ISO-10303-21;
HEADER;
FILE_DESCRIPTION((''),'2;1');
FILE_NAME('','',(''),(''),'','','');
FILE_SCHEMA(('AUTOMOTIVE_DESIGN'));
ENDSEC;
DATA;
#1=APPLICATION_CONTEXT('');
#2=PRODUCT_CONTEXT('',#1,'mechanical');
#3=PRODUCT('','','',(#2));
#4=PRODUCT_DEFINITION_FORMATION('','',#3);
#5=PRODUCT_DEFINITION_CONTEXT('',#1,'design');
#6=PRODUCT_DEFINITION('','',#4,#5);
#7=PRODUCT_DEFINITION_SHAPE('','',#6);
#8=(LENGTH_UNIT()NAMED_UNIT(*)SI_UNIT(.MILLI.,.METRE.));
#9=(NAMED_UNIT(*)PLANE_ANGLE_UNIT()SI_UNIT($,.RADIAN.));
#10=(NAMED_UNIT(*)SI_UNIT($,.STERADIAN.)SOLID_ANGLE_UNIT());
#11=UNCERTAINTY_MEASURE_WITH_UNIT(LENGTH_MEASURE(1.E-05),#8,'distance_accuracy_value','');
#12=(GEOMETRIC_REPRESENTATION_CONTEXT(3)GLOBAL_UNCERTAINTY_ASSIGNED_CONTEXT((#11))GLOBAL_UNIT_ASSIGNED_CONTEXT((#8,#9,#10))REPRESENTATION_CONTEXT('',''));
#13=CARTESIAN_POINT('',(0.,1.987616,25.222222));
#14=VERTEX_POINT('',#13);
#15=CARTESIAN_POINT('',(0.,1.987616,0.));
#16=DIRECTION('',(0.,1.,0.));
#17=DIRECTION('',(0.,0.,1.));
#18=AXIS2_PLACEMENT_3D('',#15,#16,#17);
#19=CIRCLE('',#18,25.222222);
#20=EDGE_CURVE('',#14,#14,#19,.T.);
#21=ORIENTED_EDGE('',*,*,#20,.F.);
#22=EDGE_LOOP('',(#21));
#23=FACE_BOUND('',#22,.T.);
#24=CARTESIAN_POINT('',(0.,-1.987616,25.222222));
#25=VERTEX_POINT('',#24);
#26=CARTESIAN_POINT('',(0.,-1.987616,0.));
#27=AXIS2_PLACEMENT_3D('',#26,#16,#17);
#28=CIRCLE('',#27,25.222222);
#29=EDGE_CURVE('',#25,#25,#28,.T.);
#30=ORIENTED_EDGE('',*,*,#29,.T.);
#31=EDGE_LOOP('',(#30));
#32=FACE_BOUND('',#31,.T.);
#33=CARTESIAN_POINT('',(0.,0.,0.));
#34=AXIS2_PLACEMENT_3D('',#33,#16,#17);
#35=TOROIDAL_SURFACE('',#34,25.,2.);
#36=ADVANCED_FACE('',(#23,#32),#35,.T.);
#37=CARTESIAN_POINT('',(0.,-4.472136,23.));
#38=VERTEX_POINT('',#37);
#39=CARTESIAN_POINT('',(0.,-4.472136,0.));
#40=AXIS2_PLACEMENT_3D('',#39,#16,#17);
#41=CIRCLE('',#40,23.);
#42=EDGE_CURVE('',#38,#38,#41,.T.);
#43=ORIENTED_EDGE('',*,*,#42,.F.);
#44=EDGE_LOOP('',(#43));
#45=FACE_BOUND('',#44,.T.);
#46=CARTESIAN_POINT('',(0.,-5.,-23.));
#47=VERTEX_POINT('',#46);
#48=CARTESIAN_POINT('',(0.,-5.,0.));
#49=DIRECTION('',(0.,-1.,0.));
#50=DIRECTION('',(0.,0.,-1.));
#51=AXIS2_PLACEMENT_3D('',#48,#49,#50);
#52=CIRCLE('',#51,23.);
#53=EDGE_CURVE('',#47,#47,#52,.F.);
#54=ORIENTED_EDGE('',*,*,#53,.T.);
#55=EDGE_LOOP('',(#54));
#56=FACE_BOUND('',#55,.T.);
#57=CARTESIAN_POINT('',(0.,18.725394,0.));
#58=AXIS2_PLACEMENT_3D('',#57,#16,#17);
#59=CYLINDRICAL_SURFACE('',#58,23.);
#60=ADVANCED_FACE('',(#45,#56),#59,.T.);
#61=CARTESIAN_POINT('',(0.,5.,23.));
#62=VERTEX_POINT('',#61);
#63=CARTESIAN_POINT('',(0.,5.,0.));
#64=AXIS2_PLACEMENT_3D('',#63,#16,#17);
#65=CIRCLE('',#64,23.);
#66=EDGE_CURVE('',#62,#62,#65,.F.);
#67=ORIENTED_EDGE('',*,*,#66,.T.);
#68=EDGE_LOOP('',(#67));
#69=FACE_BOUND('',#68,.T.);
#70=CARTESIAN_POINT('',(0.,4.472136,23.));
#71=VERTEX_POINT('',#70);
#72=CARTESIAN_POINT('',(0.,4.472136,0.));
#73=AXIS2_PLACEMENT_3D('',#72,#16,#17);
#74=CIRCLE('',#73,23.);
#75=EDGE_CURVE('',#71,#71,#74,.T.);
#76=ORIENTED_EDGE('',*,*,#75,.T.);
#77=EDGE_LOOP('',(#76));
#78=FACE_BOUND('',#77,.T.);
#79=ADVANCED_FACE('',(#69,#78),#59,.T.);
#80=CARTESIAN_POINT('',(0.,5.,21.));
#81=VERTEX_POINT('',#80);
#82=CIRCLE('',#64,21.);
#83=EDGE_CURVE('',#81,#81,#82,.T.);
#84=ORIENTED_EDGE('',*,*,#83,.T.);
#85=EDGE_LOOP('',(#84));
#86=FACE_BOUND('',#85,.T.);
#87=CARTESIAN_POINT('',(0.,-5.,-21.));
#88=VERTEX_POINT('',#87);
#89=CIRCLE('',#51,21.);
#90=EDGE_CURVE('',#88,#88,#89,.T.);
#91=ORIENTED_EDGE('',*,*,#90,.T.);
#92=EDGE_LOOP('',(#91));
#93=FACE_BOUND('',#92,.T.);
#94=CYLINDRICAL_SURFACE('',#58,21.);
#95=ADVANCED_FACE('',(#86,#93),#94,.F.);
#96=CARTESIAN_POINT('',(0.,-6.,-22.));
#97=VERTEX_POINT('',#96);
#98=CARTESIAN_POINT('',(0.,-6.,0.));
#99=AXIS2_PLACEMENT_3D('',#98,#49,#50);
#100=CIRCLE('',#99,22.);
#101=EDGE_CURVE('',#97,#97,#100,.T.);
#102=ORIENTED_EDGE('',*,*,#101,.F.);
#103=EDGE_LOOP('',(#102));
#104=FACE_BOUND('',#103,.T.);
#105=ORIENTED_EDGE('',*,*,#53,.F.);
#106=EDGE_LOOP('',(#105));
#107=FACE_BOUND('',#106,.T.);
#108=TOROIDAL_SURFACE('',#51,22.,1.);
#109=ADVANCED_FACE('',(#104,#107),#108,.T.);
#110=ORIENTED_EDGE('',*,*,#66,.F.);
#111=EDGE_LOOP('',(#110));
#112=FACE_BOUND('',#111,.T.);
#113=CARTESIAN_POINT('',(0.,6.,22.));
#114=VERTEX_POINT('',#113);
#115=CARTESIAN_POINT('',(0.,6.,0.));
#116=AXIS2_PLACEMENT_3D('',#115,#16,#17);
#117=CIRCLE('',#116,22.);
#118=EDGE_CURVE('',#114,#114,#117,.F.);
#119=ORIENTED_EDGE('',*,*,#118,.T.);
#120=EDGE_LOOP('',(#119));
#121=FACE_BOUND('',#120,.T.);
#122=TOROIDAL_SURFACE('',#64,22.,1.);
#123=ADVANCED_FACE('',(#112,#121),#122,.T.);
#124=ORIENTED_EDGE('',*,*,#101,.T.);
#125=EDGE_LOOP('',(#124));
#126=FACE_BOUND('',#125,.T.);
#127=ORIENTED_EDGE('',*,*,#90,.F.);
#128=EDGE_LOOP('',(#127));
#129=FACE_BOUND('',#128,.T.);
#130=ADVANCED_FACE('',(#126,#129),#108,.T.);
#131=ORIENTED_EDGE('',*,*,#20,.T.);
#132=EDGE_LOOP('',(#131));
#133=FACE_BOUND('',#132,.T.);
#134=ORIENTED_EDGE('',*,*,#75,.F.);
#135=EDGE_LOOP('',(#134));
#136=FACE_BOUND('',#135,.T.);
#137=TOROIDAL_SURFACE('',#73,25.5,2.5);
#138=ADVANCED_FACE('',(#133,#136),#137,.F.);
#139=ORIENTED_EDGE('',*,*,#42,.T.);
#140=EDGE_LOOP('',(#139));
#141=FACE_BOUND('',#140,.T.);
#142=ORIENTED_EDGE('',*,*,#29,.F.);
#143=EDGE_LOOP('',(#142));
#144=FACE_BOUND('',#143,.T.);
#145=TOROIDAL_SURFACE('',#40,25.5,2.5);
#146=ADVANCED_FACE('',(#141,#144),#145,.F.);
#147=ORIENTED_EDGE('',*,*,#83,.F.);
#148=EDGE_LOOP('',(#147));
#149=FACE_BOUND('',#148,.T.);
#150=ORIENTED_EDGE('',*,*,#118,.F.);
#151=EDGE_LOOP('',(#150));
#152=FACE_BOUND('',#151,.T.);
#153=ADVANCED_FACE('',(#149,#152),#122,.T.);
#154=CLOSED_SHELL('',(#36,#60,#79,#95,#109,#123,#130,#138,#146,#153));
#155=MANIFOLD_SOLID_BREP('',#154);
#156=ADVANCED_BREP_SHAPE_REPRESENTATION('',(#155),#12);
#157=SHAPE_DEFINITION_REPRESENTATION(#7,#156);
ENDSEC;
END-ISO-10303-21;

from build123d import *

# Parameters (mm, degrees)
FILLET_1_R = 1


with BuildPart() as part:
    # 草图1 → 旋转1 (revolve)
    with BuildSketch(Plane.XY, mode=Mode.PRIVATE) as revolve_1_sk:
        with BuildLine():
            Line((-23, 6), (-23, 4.472135955))
            ThreePointArc((-23, 4.472135955), (-23.636610019, 2.805469288), (-25.222222222, 1.98761598))
            ThreePointArc((-25.222222222, 1.98761598), (-27, 0), (-25.222222222, -1.98761598))
            ThreePointArc((-25.222222222, -1.98761598), (-23.636610019, -2.805469288), (-23, -4.472135955))
            Line((-23, -4.472135955), (-23, -6))
            Line((-23, -6), (-21, -6))
            Line((-21, -6), (-21, 6))
            Line((-21, 6), (-23, 6))
        make_face()
    revolve(revolve_1_sk.sketch.rotate(Axis((0, 18.72539369, 0), (0, -1, 0)), 270), axis=Axis((0, 18.72539369, 0), (0, -1, 0)))

    # 圆角1
    fillet_1_edges = [part.edges().sort_by_distance(p)[0] for p in [
        (0, -6, -23),
        (0, -6, -21),
        (0, 6, -21),
        (0, 6, -23),
    ]]
    fillet(fillet_1_edges, radius=FILLET_1_R - 0.0001)  # a hair under: the kernel refuses the full size


solid = part.part
